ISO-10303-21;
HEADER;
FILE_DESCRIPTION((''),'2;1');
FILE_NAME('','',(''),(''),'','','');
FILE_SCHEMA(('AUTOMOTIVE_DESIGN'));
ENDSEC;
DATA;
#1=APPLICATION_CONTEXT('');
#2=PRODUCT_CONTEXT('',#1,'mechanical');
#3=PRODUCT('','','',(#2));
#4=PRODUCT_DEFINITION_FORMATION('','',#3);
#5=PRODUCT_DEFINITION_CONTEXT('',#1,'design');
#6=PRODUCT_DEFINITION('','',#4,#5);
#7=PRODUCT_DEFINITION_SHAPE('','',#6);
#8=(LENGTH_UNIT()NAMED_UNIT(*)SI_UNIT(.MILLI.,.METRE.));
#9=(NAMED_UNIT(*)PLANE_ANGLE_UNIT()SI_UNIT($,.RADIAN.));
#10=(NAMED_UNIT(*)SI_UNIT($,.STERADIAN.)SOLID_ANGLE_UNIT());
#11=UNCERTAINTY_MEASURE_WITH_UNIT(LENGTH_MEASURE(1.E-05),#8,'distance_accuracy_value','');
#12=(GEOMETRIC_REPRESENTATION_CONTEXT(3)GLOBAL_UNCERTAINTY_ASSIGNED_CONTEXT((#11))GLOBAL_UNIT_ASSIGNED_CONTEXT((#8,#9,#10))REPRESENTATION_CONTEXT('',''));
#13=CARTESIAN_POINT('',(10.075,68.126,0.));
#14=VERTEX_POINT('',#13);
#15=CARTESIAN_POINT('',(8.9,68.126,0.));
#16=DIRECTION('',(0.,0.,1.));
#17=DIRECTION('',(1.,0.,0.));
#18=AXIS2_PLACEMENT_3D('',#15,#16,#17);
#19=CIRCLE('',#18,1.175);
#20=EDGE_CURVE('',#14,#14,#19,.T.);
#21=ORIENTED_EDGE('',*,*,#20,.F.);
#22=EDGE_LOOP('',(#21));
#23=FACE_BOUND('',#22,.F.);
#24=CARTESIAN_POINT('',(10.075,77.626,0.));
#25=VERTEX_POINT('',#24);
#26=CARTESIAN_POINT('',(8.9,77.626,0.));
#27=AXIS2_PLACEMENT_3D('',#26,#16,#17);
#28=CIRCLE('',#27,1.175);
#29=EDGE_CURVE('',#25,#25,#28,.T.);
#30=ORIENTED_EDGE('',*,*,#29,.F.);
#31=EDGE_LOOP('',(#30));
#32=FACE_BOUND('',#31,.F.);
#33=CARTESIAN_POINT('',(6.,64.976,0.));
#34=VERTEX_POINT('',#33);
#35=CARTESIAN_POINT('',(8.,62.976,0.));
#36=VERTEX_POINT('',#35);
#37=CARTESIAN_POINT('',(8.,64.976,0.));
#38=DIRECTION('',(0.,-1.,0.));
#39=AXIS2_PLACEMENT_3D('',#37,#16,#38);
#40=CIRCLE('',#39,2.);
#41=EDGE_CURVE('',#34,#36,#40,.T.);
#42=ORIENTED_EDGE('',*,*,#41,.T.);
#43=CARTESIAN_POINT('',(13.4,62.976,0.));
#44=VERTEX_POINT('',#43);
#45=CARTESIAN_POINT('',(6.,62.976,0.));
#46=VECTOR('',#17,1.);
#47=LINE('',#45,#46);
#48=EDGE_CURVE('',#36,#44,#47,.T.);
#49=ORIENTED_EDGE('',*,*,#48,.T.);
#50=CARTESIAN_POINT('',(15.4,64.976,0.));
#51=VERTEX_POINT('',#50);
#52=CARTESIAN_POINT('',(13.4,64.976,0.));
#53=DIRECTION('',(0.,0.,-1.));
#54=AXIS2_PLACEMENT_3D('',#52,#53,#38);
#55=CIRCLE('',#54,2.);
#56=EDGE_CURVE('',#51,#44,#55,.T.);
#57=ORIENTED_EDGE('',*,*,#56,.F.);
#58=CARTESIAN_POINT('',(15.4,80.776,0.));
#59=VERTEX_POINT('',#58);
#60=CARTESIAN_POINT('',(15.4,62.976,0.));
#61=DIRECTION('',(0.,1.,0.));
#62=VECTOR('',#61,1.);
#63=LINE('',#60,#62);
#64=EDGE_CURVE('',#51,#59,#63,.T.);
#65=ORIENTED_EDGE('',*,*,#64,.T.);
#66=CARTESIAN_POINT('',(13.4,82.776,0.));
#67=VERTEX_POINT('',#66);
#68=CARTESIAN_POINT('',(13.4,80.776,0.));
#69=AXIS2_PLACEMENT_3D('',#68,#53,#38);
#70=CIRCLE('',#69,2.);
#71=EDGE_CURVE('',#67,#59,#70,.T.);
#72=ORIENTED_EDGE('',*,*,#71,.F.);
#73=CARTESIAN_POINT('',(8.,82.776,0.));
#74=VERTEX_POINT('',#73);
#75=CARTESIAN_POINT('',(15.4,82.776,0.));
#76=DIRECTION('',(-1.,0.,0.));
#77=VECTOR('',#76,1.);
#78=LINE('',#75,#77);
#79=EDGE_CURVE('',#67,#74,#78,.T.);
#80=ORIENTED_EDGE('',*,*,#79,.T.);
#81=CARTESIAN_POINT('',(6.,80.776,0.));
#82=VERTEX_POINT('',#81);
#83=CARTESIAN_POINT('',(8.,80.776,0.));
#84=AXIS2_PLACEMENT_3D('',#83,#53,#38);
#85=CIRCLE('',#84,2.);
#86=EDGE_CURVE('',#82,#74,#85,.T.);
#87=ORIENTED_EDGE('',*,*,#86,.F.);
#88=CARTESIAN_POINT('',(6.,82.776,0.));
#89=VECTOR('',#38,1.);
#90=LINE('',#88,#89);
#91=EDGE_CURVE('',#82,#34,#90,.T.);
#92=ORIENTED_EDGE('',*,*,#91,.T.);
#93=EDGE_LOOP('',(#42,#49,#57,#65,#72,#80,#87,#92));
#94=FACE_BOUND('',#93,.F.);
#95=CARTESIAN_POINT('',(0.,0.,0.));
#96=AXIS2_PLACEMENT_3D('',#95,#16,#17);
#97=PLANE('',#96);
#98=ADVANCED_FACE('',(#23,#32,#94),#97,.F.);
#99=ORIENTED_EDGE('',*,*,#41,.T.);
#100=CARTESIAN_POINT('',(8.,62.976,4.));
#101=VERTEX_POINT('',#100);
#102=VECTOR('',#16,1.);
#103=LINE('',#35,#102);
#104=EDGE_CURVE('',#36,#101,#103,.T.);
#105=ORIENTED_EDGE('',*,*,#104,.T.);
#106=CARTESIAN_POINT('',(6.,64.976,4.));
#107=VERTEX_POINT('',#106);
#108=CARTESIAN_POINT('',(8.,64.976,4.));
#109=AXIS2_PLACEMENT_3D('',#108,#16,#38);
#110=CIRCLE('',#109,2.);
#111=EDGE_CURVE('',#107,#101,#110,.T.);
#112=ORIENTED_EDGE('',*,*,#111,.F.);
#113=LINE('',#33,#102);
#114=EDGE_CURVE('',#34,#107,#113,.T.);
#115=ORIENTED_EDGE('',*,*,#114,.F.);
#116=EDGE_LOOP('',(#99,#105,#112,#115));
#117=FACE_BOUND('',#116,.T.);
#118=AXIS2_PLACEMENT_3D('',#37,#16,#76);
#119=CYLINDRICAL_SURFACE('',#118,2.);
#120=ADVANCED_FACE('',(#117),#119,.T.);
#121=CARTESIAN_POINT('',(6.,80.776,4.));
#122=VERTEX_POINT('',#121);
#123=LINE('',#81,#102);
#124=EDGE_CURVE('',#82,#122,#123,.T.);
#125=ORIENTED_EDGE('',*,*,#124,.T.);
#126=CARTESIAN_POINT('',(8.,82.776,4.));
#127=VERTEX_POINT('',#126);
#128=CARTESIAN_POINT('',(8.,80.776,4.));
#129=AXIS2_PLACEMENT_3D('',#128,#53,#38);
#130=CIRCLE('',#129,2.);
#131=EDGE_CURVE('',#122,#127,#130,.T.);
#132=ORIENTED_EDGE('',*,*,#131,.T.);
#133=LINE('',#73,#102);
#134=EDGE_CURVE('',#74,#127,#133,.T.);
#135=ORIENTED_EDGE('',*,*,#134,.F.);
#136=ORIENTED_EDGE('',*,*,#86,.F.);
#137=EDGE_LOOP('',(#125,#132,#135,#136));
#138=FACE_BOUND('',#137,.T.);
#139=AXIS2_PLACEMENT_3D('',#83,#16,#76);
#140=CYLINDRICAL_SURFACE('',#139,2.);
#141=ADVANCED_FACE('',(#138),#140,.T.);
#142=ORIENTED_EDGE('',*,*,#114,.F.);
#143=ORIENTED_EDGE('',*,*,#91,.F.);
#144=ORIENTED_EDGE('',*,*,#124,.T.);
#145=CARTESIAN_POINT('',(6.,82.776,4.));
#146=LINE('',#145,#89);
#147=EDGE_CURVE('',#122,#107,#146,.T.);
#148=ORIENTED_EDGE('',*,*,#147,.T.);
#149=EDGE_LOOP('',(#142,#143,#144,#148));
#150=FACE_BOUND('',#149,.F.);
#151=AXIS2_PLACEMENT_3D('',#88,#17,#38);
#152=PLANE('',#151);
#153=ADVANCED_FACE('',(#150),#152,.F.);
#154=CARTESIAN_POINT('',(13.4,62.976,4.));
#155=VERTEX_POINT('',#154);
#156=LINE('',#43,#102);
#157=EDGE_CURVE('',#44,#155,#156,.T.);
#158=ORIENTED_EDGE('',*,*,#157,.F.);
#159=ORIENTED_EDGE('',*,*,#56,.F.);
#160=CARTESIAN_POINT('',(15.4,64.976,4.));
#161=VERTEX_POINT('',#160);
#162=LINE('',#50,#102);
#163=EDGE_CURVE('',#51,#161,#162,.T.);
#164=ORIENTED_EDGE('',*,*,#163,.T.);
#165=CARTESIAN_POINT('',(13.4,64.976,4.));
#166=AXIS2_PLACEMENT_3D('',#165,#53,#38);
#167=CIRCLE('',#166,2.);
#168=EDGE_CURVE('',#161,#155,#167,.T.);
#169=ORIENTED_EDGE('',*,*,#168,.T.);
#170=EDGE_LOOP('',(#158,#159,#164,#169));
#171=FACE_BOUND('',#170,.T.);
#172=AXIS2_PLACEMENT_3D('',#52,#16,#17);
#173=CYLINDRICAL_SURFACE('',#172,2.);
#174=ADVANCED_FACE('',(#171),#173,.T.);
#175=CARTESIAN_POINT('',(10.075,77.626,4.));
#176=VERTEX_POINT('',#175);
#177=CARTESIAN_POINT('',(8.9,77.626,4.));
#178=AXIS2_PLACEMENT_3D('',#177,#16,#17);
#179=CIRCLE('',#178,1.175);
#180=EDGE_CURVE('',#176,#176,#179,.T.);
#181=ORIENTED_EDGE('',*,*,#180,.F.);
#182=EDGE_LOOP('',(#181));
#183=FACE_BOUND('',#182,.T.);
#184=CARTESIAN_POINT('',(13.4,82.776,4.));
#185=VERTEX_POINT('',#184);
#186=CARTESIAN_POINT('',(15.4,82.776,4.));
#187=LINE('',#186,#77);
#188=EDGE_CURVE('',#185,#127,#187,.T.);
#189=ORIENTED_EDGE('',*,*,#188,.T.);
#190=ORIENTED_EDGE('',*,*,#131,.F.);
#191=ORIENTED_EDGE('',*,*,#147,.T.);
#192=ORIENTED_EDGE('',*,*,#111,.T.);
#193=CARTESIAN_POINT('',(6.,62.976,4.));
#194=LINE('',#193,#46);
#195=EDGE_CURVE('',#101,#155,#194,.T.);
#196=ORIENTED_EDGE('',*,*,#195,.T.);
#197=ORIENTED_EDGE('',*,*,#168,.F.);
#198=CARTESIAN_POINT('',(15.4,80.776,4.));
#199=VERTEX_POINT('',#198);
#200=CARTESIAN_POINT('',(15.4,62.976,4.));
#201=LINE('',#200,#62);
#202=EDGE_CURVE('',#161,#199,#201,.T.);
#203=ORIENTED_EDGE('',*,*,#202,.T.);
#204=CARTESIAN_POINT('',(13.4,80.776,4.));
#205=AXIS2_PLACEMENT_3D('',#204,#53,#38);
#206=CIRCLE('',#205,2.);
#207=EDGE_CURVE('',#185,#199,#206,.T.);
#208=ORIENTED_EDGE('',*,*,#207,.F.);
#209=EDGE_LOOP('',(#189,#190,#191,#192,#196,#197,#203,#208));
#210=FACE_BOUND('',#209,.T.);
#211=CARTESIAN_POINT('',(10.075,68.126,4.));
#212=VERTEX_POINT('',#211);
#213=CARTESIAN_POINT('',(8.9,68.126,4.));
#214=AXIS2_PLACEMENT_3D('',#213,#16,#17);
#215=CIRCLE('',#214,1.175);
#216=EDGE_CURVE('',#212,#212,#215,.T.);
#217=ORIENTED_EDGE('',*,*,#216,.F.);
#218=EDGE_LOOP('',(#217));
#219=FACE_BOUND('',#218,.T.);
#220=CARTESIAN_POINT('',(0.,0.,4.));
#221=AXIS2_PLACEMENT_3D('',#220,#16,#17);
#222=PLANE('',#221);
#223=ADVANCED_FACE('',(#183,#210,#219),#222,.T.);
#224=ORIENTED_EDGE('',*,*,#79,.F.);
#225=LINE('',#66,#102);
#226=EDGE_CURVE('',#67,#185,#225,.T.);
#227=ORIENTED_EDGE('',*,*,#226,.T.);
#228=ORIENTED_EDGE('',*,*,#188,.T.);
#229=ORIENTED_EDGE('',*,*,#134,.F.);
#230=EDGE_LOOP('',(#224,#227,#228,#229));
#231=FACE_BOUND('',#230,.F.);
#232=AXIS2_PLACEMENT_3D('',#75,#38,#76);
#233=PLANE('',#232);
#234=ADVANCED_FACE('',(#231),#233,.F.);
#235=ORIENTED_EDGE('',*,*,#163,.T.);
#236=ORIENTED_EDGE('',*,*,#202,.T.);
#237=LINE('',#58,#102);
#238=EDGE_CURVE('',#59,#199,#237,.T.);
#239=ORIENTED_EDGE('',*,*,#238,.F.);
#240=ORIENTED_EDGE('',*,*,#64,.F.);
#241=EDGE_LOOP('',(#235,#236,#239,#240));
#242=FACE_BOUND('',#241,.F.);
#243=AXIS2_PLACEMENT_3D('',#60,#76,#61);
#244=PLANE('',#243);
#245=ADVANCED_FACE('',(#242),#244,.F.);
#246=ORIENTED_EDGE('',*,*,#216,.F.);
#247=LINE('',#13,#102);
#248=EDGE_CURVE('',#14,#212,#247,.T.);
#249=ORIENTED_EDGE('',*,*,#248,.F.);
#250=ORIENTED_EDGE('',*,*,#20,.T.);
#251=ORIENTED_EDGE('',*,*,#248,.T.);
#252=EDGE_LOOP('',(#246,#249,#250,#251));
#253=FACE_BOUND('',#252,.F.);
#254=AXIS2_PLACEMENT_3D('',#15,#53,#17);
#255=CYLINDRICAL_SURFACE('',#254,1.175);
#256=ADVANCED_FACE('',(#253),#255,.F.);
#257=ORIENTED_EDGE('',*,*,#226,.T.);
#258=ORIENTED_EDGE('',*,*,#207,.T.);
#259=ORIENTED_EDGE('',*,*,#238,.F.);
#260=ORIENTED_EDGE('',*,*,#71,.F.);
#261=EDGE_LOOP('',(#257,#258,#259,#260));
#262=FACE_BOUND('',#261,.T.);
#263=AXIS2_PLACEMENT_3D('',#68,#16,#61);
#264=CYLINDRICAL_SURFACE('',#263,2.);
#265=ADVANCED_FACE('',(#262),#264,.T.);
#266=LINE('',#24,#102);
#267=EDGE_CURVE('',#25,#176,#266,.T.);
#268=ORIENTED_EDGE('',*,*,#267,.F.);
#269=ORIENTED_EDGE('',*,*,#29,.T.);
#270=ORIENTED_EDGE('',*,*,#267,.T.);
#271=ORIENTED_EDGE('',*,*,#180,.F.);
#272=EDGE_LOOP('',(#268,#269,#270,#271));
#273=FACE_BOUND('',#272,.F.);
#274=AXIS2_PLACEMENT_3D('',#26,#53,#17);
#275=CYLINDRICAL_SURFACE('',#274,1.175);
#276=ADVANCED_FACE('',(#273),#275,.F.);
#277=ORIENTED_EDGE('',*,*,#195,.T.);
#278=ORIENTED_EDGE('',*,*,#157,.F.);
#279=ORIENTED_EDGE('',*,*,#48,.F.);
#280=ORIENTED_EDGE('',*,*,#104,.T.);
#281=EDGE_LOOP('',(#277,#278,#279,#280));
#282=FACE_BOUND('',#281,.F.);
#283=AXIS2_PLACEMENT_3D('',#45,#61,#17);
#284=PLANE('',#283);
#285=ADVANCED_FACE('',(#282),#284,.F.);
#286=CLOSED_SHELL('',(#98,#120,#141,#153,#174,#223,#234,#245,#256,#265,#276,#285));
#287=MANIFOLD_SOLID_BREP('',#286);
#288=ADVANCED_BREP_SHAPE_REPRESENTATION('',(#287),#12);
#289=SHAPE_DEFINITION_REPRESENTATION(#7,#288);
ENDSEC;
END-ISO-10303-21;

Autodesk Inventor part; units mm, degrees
ref_plane "YZ Plane" through (0, 0, 0) normal (1, 0, 0) x (0, 1, 0)
ref_plane "XZ Plane" through (0, 0, 0) normal (0, 1, 0) x (-1, 0, 0)
ref_plane "XY Plane" through (0, 0, 0) normal (0, 0, 1) x (1, 0, 0)
sketch "Sketch1" plane through (0, 0, 0) normal (0, 0, 1) x (1, 0, 0)
  line L0 (-17.9772, -42.3695) -> (-21.9772, -42.3695) construction
  line L1 (-21.9772, -42.3695) -> (-21.9772, -36.3695) construction
  line L2 (-21.9772, -36.3695) -> (-17.9772, -36.3695) construction
  line L3 (-17.9772, -36.3695) -> (-17.9772, -42.3695) construction
  line L4 (52, -0.656) -> (44, -0.656) construction
  line L5 (44, -0.656) -> (44, 3.344) construction
  line L6 (44, 3.344) -> (52, 3.344) construction
  line L7 (52, 3.344) -> (52, -0.656) construction
  line L8 (-62, 48.621) -> (-62, 52.621) construction
  line L9 (-62, 52.621) -> (-54, 52.621) construction
  line L10 (-54, 52.621) -> (-54, 48.621) construction
  line L11 (-54, 48.621) -> (-62, 48.621) construction
  line L12 (-52, 7.344) -> (-52, 11.344) construction
  line L13 (-52, 11.344) -> (-44, 11.344) construction
  line L14 (-44, 11.344) -> (-44, 7.344) construction
  line L15 (-44, 7.344) -> (-52, 7.344) construction
  line L16 (62, 52.621) -> (62, 48.621) construction
  line L17 (62, 48.621) -> (54, 48.621) construction
  line L18 (54, 48.621) -> (54, 52.621) construction
  line L19 (54, 52.621) -> (62, 52.621) construction
  line L20 (44, 7.344) -> (44, 11.344) construction
  line L21 (44, 11.344) -> (52, 11.344) construction
  line L22 (52, 11.344) -> (52, 7.344) construction
  line L23 (52, 7.344) -> (44, 7.344) construction
  line L24 (-62, 56.621) -> (-62, 60.621) construction
  line L25 (-62, 60.621) -> (-54, 60.621) construction
  line L26 (-54, 60.621) -> (-54, 56.621) construction
  line L27 (-54, 56.621) -> (-62, 56.621) construction
  line L28 (-52, -0.656) -> (-52, 3.344) construction
  line L29 (-52, 3.344) -> (-44, 3.344) construction
  line L30 (-44, 3.344) -> (-44, -0.656) construction
  line L31 (-44, -0.656) -> (-52, -0.656) construction
  line L32 (62, 56.621) -> (54, 56.621) construction
  line L33 (54, 56.621) -> (54, 60.621) construction
  line L34 (54, 60.621) -> (62, 60.621) construction
  line L35 (62, 60.621) -> (62, 56.621) construction
  line L36 (95, 92.776) -> (95, 67.276) construction
  line L37 (-95, 92.776) -> (95, 92.776) construction
  line L38 (-95, 67.276) -> (-95, 92.776) construction
  spline S0 degree 4 poles (-93.2021, 32.276) (-94.3974, 41.3088) (-94.1998, 50.4639) (-95, 58.5765) (-95, 67.276) knots 0 0 0 0 0 1 1 1 1 1 construction
  spline S1 degree 3 poles (-93.2021, 32.276) (-92.477, 26.7964) (-92.3858, 18.3442) (-91.1679, 2.9086) (-90.2735, -4.0991) (-87.5297, -12.5723) (-86.3245, -15.3658) (-83.5784, -19.0417) (-82.333, -20.2665) (-79.6267, -21.887) (-78.3236, -22.3544) (-75.4283, -22.8138) (-73.9041, -22.7525) (-70.1581, -22.0875) (-67.9924, -21.2389) (-63.108, -18.9118) (-60.4378, -17.2966) (-54.8519, -14.6799) (-51.0186, -13.1408) (-44.4768, -12.6137) (-42.1843, -12.7653) (-38.5465, -13.8837) (-37.172, -14.5679) (-34.6876, -16.441) (-33.6448, -17.5823) (-32.7756, -18.8783) knots 0 0 0 0 1.658209 1.658209 2.939775 2.939775 3.538541 3.538541 3.905679 3.905679 4.202372 4.202372 4.52291 4.52291 5.00118 5.00118 5.654804 5.654804 6.203864 6.203864 6.490865 6.490865 6.688319 6.688319 6.886783 6.886783 6.886783 6.886783 construction
  spline S2 degree 4 poles (95, 67.276) (95, 55.7504) (92.5859, 37.7114) (100.8312, 0.406) (16.3507, -5.0368) (37.7982, -57.0134) (0, -92.776) (-31.6805, -62.8016) (-26.5791, -34.2881) (-31.0379, -21.8211) (-32.7756, -18.8783) knots 0 0 0 0 0 0.141322 0.242902 0.345989 0.449799 0.550201 0.654011 0.69056 0.69056 0.69056 0.69056 0.69056 construction
  line L39 (-40, 82.776) -> (-44, 82.776) construction
  line L40 (-40, 62.776) -> (-40, 82.776) construction
  line L41 (-44, 62.776) -> (-40, 62.776) construction
  line L42 (-44, 82.776) -> (-44, 62.776) construction
  line L43 (-40, 22.776) -> (-40, 42.776) construction
  line L44 (-44, 22.776) -> (-40, 22.776) construction
  line L45 (-44, 42.776) -> (-44, 22.776) construction
  line L46 (-40, 42.776) -> (-44, 42.776) construction
  line L47 (-10, 12.776) -> (-30, 12.776) construction
  line L48 (-10, 8.776) -> (-10, 12.776) construction
  line L49 (-30, 8.776) -> (-10, 8.776) construction
  line L50 (-30, 12.776) -> (-30, 8.776) construction
  line L51 (44, 82.776) -> (40, 82.776) construction
  line L52 (44, 62.776) -> (44, 82.776) construction
  line L53 (40, 62.776) -> (44, 62.776) construction
  line L54 (40, 82.776) -> (40, 62.776) construction
  line L55 (44, 22.776) -> (44, 42.776) construction
  line L56 (40, 22.776) -> (44, 22.776) construction
  line L57 (40, 42.776) -> (40, 22.776) construction
  line L58 (44, 42.776) -> (40, 42.776) construction
  line L59 (30, 12.776) -> (10, 12.776) construction
  line L60 (30, 8.776) -> (30, 12.776) construction
  line L61 (10, 8.776) -> (30, 8.776) construction
  line L62 (10, 12.776) -> (10, 8.776) construction
  circle A0 centre (-78.75, 27.8364) radius 1.5 construction
  circle A1 centre (-58.125, 15.9285) radius 1.5 construction
  circle A2 centre (-71.875, 15.9285) radius 1.5 construction
  circle A3 centre (-71.875, 39.7442) radius 1.5 construction
  circle A4 centre (-58.125, 39.7442) radius 1.5 construction
  circle A5 centre (-51.25, 27.8364) radius 1.5 construction
  circle A6 centre (-65, 27.8364) radius 10.5 construction
  circle A7 centre (-8.625, -30.663) radius 1.5 construction
  circle A8 centre (8.625, -30.663) radius 1.5 construction
  circle A9 centre (17.25, -15.724) radius 1.5 construction
  circle A10 centre (8.625, -0.7851) radius 1.5 construction
  circle A11 centre (-8.625, -0.7851) radius 1.5 construction
  circle A12 centre (-17.25, -15.724) radius 1.5 construction
  circle A13 centre (6.875, -45.3162) radius 1.5 construction
  circle A14 centre (13.75, -57.224) radius 1.5 construction
  circle A15 centre (0, -57.224) radius 10.5 construction
  circle A16 centre (-6.875, -69.1319) radius 1.5 construction
  circle A17 centre (6.875, -69.1319) radius 1.5 construction
  circle A18 centre (-6.875, -45.3162) radius 1.5 construction
  circle A19 centre (-13.75, -57.224) radius 1.5 construction
  circle A20 centre (58.125, 15.9285) radius 1.5 construction
  circle A21 centre (71.875, 15.9285) radius 1.5 construction
  circle A22 centre (78.75, 27.8364) radius 1.5 construction
  circle A23 centre (71.875, 39.7442) radius 1.5 construction
  circle A24 centre (58.125, 39.7442) radius 1.5 construction
  circle A25 centre (51.25, 27.8364) radius 1.5 construction
  circle A26 centre (0, -15.724) radius 14 construction
  circle A27 centre (65, 27.8364) radius 10.5 construction
  circle A28 centre (8.9, 77.626) radius 1.175
  circle A29 centre (8.9, 68.126) radius 1.175
  line L63 (6, 62.976) -> (15.4, 62.976)
  line L64 (15.4, 62.976) -> (15.4, 82.776)
  line L65 (15.4, 82.776) -> (6, 82.776)
  line L66 (6, 82.776) -> (6, 62.976)
  point P0 (0, 0)
  dimension "d0" = 24.6
  dimension "d1" = 2.35
  dimension "d2" = 9.5
  dimension "d3" = 19.8
  dimension "d4" = 9.4
  dimension "d5" = 5.15
  dimension "d6" = 2.9
  dimension "d7" = 10
extrude "Extrusion1" add sketch "Sketch1" along normal blind 4
fillet "Fillet1" radius 2 4 edges at (6, 62.976, 2) (15.4, 62.976, 2) (15.4, 82.776, 2) (6, 82.776, 2)
properties part number "Door_LimitSwitch_Offset" material "MDF Medium Density Fiberboard"
